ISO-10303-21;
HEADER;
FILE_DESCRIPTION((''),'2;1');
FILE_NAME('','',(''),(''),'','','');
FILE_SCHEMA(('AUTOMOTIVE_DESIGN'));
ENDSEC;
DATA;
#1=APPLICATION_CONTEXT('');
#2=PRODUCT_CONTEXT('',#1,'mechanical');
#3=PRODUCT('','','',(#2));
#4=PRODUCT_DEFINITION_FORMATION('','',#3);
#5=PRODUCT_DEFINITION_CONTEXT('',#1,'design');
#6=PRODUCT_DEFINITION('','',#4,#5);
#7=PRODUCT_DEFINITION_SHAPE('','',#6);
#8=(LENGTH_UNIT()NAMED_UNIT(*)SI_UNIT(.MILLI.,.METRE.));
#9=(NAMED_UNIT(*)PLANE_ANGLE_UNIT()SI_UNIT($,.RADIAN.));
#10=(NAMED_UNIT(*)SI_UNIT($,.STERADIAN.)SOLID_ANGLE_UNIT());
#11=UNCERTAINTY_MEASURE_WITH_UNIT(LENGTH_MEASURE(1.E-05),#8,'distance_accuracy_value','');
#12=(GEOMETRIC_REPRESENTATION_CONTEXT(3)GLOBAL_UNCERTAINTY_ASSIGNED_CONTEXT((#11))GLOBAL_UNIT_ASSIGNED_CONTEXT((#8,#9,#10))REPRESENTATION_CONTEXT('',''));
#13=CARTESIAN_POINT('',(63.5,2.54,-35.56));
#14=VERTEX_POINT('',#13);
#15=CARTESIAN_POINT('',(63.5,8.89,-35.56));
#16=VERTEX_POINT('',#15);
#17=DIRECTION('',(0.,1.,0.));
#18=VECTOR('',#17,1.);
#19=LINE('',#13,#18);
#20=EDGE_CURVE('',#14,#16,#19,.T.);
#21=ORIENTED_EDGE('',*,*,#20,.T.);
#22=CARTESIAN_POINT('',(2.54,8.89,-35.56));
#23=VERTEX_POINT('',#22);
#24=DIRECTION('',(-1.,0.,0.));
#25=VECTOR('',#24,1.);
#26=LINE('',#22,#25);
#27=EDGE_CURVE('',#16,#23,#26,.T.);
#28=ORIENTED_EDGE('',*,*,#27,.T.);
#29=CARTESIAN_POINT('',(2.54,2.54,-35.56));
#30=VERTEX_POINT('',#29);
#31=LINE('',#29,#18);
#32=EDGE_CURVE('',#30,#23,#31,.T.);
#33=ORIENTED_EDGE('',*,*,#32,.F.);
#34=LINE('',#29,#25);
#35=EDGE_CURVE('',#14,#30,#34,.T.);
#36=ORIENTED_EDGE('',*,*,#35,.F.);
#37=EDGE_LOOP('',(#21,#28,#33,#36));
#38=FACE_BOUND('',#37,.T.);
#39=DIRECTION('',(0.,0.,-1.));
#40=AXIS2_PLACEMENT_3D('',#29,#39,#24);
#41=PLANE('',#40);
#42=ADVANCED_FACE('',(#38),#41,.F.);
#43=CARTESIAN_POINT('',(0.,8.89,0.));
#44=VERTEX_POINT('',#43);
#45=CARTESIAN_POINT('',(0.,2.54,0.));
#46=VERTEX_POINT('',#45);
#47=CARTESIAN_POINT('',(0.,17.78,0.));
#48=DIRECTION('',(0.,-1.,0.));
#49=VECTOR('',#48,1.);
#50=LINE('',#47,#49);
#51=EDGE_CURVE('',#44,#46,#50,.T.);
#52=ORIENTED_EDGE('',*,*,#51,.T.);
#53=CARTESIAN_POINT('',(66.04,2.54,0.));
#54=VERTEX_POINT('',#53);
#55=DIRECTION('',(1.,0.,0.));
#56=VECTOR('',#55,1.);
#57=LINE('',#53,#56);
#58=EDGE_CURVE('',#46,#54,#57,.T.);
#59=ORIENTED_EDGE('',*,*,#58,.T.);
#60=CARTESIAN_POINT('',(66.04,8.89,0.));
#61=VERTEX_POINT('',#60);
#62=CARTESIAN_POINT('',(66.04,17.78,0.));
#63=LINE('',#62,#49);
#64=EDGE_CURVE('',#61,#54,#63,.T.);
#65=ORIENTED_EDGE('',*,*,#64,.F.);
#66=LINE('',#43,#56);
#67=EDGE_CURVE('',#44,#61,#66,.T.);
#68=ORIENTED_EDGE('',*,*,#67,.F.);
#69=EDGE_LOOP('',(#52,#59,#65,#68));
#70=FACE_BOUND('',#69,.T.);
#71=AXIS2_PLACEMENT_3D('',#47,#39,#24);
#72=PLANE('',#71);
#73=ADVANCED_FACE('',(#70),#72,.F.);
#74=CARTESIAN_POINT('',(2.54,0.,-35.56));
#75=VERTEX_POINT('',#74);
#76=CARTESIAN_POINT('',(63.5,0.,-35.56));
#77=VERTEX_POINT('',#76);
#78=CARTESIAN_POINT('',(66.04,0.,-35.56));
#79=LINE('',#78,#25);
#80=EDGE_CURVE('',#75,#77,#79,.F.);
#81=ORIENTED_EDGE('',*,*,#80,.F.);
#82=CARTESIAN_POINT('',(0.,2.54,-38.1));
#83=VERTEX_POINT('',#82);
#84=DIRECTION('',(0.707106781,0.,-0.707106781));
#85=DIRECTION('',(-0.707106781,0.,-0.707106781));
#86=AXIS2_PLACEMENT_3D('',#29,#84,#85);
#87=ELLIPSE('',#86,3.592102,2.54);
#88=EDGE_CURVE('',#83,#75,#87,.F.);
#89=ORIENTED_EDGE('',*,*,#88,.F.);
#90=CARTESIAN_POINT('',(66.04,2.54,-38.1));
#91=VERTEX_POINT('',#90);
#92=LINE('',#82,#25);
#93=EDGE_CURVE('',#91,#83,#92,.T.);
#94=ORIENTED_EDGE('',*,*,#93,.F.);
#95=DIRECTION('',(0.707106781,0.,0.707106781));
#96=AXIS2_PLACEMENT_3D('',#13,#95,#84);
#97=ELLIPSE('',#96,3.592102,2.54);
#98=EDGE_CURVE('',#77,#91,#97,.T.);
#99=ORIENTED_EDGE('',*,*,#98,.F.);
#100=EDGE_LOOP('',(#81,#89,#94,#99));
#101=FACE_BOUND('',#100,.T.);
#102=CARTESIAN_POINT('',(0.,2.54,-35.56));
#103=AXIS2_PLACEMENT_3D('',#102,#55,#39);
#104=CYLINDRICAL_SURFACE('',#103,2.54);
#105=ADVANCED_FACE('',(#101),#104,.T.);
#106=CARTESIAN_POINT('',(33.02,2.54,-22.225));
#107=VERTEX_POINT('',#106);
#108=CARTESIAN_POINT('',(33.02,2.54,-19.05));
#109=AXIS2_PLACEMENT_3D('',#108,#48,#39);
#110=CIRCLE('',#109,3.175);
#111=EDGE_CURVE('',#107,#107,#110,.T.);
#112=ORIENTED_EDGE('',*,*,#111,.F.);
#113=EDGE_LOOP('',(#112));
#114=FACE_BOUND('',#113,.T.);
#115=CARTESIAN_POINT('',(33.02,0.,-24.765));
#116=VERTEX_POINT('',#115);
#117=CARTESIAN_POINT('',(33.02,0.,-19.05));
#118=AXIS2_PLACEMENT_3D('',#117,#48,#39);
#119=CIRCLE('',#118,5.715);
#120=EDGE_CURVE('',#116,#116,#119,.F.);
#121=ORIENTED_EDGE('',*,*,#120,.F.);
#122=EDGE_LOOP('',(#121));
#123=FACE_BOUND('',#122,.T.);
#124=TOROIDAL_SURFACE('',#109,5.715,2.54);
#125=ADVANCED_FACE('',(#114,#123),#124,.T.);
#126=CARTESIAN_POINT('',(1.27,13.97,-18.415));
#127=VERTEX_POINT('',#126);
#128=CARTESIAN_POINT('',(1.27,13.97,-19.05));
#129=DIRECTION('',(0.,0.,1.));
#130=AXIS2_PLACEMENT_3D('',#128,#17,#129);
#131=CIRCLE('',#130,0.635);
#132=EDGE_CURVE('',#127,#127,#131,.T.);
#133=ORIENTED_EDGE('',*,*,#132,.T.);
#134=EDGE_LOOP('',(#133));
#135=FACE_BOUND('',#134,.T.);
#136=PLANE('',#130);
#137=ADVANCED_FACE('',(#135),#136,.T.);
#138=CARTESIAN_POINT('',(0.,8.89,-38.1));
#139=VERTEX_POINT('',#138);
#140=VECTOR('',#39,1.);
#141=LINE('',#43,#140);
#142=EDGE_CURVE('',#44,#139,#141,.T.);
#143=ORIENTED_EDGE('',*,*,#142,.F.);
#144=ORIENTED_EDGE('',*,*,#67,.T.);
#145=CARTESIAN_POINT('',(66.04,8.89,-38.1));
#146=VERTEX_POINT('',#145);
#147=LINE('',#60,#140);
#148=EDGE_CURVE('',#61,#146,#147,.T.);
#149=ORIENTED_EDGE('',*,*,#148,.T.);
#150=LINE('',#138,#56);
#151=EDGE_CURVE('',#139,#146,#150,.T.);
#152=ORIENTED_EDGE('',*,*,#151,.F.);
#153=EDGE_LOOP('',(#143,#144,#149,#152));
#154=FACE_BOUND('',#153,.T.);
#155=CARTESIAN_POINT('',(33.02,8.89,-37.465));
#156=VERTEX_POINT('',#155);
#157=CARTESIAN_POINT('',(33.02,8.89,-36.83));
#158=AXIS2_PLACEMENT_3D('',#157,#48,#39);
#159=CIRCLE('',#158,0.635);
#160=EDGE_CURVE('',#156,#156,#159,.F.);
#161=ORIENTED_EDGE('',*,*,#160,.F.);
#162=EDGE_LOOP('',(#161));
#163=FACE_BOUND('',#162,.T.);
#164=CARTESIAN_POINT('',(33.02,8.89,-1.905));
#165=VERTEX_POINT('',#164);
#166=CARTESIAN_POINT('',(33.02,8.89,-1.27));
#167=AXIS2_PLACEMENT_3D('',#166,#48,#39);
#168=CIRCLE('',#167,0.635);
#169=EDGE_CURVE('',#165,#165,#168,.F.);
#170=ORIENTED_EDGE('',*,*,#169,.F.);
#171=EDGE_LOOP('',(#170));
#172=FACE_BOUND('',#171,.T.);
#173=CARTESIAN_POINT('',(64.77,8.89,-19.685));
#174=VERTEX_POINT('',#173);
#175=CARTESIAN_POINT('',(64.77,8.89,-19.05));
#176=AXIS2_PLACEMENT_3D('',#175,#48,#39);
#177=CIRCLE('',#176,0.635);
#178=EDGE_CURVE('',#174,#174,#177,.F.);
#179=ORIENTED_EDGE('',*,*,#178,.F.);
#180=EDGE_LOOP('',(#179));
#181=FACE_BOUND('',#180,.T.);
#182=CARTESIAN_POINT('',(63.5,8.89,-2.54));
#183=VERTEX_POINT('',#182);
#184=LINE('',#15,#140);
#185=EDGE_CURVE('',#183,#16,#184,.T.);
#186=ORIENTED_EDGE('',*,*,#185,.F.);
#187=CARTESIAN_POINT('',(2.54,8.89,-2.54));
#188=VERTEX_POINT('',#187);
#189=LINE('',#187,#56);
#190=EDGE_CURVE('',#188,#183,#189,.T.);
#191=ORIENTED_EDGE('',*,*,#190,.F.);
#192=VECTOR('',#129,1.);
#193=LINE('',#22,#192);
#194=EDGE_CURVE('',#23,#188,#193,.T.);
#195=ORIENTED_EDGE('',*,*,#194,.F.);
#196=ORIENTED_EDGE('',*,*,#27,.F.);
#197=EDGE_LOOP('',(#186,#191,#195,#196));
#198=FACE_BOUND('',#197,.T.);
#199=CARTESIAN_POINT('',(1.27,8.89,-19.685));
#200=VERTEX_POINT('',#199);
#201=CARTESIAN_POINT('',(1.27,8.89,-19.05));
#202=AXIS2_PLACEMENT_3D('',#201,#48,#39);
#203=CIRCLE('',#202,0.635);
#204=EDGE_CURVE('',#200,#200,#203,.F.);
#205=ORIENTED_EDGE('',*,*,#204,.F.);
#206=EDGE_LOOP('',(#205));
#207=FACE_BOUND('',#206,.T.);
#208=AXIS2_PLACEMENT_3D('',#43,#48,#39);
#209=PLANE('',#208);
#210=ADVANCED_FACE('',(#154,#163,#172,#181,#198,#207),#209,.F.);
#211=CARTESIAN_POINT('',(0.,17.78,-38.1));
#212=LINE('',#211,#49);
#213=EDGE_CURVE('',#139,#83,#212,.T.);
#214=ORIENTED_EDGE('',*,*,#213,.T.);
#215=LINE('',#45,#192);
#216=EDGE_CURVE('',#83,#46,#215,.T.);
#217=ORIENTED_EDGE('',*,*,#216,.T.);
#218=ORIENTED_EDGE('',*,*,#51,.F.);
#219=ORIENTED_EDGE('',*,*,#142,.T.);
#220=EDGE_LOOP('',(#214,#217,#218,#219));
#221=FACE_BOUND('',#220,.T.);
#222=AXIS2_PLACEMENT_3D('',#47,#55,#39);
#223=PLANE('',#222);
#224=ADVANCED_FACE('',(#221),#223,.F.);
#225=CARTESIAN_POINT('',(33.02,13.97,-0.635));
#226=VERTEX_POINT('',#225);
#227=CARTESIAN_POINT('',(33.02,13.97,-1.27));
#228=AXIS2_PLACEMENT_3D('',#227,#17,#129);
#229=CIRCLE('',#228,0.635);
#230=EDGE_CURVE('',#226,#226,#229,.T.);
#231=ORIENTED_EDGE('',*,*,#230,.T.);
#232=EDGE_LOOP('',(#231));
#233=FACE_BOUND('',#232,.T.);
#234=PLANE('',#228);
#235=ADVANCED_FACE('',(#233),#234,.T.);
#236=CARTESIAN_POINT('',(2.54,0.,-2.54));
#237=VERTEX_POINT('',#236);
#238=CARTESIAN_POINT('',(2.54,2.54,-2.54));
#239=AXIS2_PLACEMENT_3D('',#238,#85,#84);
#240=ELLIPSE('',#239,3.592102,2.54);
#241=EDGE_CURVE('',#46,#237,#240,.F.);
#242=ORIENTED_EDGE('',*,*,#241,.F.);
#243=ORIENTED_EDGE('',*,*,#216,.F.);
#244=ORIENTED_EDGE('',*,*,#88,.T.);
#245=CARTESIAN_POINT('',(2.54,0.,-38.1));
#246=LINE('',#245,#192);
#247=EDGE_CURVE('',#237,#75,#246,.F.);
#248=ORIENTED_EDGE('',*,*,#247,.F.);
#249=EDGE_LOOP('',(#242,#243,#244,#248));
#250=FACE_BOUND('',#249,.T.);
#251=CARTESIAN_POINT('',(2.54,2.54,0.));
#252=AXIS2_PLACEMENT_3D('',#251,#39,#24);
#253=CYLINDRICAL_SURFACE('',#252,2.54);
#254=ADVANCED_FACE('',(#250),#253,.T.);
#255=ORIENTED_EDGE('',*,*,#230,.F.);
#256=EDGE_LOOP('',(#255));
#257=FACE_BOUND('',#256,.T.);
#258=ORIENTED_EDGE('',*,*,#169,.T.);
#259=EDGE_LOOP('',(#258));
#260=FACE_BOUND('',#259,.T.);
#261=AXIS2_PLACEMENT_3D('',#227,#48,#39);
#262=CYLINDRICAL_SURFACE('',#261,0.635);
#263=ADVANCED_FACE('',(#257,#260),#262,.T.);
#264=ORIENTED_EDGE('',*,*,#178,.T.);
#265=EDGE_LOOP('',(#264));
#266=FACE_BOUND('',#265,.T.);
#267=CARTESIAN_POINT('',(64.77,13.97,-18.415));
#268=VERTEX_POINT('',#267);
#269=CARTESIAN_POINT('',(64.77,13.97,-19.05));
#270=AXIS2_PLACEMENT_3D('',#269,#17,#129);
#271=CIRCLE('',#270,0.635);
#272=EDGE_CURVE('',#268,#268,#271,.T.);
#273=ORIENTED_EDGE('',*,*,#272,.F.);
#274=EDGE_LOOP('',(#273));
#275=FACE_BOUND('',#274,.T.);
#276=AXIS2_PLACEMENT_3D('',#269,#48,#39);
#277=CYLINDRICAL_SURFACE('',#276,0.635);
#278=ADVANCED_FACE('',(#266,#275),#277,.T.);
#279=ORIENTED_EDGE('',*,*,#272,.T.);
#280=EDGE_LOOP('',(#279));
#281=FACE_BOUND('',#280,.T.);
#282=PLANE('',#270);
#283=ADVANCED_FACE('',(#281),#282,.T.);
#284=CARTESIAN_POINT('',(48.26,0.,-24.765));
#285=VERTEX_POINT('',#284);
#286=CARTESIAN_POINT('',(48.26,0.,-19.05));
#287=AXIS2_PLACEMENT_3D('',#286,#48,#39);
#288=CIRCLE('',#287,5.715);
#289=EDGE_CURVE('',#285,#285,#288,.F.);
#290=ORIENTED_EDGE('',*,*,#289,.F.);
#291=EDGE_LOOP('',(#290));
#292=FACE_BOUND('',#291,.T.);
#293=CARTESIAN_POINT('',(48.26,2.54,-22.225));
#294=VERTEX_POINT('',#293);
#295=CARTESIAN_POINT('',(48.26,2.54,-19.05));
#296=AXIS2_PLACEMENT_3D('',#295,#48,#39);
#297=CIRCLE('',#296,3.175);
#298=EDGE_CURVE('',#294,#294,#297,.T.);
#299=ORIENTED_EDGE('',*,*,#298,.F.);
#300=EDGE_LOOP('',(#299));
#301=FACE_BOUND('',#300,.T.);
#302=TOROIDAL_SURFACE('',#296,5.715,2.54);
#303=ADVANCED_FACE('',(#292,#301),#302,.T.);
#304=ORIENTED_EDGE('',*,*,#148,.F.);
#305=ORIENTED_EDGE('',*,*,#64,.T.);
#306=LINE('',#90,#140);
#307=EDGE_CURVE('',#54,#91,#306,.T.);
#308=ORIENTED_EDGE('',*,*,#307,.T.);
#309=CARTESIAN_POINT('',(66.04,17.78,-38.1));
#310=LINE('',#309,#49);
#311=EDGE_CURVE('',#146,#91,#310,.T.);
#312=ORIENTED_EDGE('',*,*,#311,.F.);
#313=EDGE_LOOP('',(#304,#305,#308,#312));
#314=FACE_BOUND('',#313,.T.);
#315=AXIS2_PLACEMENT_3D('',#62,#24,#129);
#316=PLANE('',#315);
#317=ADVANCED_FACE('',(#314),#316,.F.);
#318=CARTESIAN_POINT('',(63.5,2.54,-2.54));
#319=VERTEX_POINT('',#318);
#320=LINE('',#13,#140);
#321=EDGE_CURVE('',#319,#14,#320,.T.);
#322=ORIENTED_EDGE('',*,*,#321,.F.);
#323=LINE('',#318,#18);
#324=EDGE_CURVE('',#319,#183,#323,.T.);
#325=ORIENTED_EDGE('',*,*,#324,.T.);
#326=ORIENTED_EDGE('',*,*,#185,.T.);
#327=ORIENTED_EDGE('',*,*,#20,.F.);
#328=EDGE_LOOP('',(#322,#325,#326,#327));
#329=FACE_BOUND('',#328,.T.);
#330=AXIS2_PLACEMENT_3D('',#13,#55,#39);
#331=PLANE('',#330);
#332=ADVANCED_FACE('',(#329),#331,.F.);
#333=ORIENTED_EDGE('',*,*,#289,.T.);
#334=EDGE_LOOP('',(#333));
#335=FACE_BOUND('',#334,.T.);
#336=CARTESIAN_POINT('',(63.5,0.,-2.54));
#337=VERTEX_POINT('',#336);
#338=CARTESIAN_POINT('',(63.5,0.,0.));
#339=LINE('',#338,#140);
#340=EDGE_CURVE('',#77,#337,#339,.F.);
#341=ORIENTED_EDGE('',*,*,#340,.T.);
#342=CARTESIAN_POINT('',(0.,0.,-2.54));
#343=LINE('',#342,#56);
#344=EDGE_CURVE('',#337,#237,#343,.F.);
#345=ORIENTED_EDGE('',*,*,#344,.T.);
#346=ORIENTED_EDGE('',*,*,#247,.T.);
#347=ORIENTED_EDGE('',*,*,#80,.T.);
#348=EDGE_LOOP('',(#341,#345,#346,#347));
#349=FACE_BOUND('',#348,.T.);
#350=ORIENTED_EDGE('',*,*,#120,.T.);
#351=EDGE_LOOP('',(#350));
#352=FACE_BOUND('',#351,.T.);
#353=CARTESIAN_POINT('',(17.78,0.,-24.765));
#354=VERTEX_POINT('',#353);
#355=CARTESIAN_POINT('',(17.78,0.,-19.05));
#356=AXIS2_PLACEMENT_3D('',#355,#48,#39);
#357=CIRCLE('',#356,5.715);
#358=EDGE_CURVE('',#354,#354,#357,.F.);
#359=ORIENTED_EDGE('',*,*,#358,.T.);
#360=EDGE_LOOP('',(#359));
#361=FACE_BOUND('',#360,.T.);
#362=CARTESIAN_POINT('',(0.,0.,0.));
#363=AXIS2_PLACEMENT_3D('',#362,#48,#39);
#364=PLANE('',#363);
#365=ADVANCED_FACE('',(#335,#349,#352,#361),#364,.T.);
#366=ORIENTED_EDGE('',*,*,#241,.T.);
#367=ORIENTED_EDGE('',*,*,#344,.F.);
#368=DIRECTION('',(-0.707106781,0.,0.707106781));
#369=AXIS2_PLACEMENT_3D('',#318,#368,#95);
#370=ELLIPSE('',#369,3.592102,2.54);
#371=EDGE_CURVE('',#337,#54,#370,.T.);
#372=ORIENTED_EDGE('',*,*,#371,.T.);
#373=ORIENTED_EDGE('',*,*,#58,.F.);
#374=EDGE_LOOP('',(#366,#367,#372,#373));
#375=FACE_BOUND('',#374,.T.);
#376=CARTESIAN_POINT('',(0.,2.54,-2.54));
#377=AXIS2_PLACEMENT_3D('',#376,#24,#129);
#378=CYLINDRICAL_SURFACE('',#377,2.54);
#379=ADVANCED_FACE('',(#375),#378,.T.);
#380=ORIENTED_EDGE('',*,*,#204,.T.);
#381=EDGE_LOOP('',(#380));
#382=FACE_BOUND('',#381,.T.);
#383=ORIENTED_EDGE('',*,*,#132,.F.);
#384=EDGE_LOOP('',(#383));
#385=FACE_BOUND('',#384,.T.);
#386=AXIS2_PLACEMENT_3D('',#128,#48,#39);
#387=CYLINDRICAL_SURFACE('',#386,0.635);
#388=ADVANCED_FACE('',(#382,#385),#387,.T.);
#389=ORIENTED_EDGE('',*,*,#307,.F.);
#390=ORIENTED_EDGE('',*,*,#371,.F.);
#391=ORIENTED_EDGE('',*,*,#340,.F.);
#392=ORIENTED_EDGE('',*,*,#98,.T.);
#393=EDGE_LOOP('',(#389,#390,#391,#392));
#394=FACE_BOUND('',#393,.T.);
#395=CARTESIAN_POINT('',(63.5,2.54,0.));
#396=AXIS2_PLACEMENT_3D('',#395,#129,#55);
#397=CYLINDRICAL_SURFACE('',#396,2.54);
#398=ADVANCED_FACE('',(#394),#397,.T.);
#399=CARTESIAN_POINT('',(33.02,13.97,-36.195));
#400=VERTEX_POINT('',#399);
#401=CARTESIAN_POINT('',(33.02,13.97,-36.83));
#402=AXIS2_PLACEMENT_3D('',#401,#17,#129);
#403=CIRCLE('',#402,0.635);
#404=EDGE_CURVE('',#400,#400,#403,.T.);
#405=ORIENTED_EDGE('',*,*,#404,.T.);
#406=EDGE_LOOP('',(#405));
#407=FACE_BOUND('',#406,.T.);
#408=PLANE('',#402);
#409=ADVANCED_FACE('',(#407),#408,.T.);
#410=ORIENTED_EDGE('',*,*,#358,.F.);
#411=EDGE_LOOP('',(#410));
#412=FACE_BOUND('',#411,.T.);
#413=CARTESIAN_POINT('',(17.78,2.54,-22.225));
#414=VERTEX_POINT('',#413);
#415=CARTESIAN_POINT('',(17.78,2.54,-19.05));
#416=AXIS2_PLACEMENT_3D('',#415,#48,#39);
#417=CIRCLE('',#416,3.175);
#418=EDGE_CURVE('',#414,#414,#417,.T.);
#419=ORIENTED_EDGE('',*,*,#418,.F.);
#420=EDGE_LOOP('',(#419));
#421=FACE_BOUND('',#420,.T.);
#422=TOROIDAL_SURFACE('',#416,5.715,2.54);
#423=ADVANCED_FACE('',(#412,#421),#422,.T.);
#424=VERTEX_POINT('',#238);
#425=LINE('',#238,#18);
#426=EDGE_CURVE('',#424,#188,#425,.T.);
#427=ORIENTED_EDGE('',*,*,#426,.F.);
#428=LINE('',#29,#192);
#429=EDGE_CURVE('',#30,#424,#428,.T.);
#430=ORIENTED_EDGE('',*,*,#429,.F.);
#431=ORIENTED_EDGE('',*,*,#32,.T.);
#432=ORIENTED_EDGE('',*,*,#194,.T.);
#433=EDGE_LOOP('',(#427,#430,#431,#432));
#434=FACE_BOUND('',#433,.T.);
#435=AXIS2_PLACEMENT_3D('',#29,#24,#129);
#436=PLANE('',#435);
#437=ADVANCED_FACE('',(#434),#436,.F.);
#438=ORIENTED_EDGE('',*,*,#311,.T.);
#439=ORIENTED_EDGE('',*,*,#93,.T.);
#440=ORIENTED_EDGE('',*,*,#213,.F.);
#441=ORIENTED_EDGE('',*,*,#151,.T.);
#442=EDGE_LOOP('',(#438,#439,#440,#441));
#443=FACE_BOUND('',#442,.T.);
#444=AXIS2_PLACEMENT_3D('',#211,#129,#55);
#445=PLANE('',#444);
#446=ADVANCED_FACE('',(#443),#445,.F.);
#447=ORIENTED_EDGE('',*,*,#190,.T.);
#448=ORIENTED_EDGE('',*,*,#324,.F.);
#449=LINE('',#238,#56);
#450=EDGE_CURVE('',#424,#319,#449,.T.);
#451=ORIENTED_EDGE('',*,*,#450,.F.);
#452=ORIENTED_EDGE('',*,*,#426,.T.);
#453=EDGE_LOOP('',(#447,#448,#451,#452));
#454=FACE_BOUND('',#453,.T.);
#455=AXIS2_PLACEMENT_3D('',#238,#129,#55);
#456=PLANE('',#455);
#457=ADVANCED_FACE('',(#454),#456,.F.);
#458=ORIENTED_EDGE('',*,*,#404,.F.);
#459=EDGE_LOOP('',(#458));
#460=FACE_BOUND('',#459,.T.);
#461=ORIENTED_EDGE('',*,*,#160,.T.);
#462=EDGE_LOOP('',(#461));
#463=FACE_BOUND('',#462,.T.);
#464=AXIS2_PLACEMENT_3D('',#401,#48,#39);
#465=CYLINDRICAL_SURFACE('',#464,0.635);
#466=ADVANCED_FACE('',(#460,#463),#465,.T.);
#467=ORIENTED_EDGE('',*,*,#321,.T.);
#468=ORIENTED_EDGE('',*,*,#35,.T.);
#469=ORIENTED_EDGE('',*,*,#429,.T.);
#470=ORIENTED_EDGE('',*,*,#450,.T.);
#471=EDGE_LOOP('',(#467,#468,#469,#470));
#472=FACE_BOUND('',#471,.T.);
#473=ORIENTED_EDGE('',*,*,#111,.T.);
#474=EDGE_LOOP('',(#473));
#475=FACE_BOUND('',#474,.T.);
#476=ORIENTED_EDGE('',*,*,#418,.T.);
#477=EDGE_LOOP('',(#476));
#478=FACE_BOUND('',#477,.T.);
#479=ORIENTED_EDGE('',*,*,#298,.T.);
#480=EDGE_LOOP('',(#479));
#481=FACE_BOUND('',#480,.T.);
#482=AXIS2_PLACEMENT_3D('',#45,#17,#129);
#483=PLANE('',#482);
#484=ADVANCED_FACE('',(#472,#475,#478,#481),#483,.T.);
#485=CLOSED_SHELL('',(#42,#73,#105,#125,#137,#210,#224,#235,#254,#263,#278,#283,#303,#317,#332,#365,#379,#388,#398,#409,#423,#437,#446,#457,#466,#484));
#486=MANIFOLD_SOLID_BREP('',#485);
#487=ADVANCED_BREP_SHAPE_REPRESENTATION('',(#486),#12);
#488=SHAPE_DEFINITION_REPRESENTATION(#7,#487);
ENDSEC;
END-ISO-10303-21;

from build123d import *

# Parameters (mm, degrees)
SKETCH1_W           = 66.04
SKETCH1_H           = 38.1
BOSS_EXTRUDE3_DEPTH = 17.78
SKETCH3_W           = 60.96
SKETCH3_H           = 33.02
CUT_EXTRUDE1_DEPTH  = 15.24
SKETCH4_W           = 38.1
SKETCH4_H           = 8.89
CUT_EXTRUDE2_DEPTH  = 66.04
SKETCH5_R           = 0.635
BOSS_EXTRUDE4_DEPTH = 5.08
SKETCH6_R           = 3.175
CUT_EXTRUDE4_DEPTH  = 2.54
FILLET1_R           = 2.54


with BuildPart() as part:
    # Sketch1 → Boss-Extrude3 (new body)
    with BuildSketch(Plane(origin=(0, 0, 0), x_dir=(1, 0, 0), z_dir=(0, 1, 0))):
        with Locations((33.02, 19.05)):
            Rectangle(SKETCH1_W, SKETCH1_H)
    extrude(amount=BOSS_EXTRUDE3_DEPTH)

    # Sketch3 → Cut-Extrude1 (cut)
    with BuildSketch(Plane(origin=(0, 17.78, 0), x_dir=(1, 0, 0), z_dir=(0, 1, 0))):
        with Locations((33.02, 19.05)):
            Rectangle(SKETCH3_W, SKETCH3_H)
    extrude(amount=-CUT_EXTRUDE1_DEPTH, mode=Mode.SUBTRACT)

    # Sketch4 → Cut-Extrude2 (cut)
    with BuildSketch(Plane(origin=(66.04, 0, 0), x_dir=(0, 0, -1), z_dir=(1, 0, 0))):
        with Locations((19.05, 13.335)):
            Rectangle(SKETCH4_W, SKETCH4_H)
    extrude(amount=-CUT_EXTRUDE2_DEPTH, mode=Mode.SUBTRACT)

    # Sketch5 → Boss-Extrude4 (add)
    with BuildSketch(Plane(origin=(0, 8.89, 0), x_dir=(1, 0, 0), z_dir=(0, 1, 0))):
        with Locations(Location((33.02, 36.83, 0), (0, 0, 90))):
            Circle(SKETCH5_R)
        with Locations(Location((33.02, 1.27, 0), (0, 0, 90))):
            Circle(SKETCH5_R)
        with Locations(Location((1.27, 19.05, 0), (0, 0, 90))):
            Circle(SKETCH5_R)
        with Locations(Location((64.77, 19.05, 0), (0, 0, 90))):
            Circle(SKETCH5_R)
    extrude(amount=BOSS_EXTRUDE4_DEPTH)

    # Sketch6 → Cut-Extrude4 (cut)
    with BuildSketch(Plane.XZ):
        with Locations(Location((17.78, -19.05, 0), (0, 0, 270))):
            Circle(SKETCH6_R)
        with Locations(Location((33.02, -19.05, 0), (0, 0, 270))):
            Circle(SKETCH6_R)
        with Locations(Location((48.26, -19.05, 0), (0, 0, 270))):
            Circle(SKETCH6_R)
    extrude(amount=-CUT_EXTRUDE4_DEPTH, mode=Mode.SUBTRACT)

    # Fillet1
    fillet1_edges = [part.edges().sort_by_distance(p)[0] for p in [
        (33.02, 0, -38.1),
        (66.04, 0, -19.05),
        (33.02, 0, 0),
        (0, 0, -19.05),
        (17.78, 0, -15.875),
        (33.02, 0, -15.875),
        (48.26, 0, -15.875),
    ]]
    fillet(fillet1_edges, radius=FILLET1_R - 0.0001)  # a hair under: the kernel refuses the full size


solid = part.part
